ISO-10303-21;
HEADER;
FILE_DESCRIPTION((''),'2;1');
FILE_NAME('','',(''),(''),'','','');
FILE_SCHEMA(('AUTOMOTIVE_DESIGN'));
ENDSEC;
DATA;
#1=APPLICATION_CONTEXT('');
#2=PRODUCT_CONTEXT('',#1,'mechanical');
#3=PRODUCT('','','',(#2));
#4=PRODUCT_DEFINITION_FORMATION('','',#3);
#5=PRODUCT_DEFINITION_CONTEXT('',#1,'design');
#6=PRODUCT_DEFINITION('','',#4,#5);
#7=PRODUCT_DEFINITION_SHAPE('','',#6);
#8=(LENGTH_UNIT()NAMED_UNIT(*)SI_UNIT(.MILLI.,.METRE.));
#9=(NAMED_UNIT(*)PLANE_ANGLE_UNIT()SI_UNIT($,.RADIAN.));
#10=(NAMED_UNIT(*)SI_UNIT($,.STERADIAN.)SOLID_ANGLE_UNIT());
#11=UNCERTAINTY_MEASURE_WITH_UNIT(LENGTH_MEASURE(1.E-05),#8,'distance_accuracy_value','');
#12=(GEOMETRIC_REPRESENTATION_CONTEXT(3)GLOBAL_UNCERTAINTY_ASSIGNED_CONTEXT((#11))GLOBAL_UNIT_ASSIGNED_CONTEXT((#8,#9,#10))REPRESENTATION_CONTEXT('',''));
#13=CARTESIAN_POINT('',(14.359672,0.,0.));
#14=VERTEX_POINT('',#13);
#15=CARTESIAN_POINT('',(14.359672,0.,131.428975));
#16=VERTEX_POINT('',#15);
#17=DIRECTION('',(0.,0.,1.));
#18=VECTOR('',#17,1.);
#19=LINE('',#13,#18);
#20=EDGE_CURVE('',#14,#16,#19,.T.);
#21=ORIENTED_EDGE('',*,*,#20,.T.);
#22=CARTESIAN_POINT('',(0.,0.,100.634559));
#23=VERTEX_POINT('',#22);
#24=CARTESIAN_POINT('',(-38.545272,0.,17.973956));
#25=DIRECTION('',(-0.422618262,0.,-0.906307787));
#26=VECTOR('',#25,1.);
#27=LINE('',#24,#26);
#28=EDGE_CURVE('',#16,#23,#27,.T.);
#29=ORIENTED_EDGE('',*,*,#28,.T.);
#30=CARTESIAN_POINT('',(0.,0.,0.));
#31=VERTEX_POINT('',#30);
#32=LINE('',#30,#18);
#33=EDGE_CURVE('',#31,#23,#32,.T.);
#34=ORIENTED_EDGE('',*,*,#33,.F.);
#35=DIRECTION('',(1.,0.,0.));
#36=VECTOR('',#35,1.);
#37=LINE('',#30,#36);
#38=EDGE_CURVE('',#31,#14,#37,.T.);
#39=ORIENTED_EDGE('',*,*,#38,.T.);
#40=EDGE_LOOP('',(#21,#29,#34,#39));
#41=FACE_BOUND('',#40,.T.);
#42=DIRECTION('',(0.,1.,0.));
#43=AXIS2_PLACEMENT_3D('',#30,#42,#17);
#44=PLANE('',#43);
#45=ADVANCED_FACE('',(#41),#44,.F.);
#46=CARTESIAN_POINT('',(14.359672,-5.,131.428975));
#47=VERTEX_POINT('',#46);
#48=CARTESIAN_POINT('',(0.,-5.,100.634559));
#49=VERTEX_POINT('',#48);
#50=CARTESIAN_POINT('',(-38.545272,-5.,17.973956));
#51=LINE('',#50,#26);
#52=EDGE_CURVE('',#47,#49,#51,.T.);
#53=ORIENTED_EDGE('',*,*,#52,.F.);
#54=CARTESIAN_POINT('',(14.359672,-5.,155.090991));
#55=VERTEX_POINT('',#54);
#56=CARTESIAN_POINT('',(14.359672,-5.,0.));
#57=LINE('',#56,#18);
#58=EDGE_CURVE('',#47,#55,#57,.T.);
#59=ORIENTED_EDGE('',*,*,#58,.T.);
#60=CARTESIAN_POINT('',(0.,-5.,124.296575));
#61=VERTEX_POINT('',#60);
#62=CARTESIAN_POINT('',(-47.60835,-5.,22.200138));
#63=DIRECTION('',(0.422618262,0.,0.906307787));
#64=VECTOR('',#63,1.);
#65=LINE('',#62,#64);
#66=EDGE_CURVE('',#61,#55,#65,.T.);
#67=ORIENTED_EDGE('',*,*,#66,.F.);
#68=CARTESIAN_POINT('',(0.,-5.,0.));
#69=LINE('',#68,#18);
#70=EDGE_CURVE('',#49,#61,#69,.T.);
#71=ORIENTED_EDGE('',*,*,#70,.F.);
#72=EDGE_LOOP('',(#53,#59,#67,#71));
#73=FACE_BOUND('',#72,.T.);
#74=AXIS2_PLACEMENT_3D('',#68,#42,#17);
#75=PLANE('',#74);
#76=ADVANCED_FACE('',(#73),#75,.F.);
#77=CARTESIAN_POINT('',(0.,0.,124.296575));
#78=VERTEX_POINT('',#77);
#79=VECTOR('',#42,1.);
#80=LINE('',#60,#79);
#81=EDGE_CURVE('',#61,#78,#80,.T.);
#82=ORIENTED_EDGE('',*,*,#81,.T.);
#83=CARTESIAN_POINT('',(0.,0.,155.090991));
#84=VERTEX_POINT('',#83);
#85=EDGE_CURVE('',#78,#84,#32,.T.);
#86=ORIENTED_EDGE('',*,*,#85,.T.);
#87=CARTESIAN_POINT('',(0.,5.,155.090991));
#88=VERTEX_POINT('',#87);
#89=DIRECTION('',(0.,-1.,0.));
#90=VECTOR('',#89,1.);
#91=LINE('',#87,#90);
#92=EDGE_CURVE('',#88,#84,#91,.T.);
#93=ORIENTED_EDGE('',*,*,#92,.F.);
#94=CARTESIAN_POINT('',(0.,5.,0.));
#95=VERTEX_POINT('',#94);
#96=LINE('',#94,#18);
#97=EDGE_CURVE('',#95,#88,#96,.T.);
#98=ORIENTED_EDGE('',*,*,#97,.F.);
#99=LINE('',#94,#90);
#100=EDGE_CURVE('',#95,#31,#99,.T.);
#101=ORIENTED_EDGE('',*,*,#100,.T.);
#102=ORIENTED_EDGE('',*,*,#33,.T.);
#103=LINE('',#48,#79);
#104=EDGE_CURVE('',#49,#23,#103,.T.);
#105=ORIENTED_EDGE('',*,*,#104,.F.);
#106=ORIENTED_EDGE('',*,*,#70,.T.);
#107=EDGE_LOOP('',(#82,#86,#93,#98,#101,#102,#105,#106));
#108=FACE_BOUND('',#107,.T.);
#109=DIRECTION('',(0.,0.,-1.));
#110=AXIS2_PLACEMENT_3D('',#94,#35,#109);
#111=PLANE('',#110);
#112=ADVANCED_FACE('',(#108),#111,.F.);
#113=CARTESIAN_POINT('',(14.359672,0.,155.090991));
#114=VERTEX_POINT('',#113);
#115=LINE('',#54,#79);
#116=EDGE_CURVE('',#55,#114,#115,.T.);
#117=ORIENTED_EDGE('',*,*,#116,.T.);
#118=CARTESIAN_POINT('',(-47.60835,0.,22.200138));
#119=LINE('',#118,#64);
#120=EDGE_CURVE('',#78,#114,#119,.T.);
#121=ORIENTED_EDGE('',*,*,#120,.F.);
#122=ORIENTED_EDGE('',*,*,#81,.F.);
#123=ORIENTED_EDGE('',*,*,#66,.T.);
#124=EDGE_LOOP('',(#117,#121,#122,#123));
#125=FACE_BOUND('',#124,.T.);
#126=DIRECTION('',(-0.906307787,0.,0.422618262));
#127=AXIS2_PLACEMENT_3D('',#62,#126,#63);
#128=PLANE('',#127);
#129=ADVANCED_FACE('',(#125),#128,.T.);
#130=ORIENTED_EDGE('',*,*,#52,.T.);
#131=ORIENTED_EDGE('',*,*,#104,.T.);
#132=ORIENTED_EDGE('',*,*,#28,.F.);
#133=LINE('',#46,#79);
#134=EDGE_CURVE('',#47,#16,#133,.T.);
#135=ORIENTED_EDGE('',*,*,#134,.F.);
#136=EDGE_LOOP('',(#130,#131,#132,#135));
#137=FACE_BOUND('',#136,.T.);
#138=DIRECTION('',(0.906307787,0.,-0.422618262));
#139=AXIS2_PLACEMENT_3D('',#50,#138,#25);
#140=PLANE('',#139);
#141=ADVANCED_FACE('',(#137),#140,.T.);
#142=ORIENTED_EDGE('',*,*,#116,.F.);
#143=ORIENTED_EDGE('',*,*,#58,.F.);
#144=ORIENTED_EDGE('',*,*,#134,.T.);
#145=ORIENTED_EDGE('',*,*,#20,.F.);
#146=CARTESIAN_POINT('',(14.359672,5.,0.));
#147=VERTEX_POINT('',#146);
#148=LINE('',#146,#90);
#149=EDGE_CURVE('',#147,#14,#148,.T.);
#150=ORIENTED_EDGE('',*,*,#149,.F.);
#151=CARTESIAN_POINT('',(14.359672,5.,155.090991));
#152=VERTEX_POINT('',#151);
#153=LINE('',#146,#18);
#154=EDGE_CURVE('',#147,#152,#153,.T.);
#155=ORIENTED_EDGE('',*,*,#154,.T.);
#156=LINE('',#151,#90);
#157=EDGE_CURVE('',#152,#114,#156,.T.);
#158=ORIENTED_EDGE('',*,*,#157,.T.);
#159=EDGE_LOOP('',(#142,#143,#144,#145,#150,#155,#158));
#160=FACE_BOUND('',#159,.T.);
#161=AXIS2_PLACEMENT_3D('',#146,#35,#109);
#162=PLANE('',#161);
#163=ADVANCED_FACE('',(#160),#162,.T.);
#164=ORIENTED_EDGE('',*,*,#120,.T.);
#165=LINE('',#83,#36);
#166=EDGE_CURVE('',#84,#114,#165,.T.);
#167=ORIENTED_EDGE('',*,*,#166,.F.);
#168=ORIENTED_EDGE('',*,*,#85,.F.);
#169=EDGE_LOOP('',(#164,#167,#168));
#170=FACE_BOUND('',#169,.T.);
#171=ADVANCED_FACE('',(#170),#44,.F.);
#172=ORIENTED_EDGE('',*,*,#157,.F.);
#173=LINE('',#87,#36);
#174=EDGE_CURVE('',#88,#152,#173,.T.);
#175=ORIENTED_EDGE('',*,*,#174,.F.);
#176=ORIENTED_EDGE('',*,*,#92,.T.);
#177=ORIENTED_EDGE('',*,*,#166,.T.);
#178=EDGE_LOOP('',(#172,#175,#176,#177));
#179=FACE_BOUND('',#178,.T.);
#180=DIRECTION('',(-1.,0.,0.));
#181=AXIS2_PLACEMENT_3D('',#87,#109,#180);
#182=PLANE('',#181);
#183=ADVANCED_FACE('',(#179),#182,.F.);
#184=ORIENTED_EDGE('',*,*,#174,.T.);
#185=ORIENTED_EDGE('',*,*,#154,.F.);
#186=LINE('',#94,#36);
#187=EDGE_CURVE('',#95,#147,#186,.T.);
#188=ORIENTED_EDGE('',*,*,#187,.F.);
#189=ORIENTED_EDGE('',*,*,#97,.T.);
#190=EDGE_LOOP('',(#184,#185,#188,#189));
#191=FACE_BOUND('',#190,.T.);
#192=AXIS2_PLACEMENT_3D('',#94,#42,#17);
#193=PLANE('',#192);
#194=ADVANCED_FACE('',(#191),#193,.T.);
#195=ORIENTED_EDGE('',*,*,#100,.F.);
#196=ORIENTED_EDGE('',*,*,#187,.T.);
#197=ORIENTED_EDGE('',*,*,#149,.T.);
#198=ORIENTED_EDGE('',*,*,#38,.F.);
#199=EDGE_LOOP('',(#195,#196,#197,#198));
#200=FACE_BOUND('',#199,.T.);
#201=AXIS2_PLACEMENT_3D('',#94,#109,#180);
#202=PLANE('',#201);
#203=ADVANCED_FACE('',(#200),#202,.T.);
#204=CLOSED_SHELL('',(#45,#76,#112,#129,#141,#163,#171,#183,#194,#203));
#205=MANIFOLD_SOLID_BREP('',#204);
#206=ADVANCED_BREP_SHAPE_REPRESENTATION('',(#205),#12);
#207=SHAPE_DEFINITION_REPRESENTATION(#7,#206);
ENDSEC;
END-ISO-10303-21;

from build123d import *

# Parameters (mm, degrees)
BOSS_EXTRUDE1_DEPTH = 5
BOSS_EXTRUDE2_START = -5
BOSS_EXTRUDE2_DEPTH = 5


# Read off the part's stored shape, not the designer's step: Boss-Extrude2
with BuildPart() as part:
    # Sketch1 → Boss-Extrude1 (new body)
    with BuildSketch(Plane(origin=(0, 0, 0), x_dir=(1, 0, 0), z_dir=(0, 1, 0))):
        Polygon((14.359671821, -155.090990788), (0, -124.296575192), (0, -155.090990788), align=None)
        Polygon((0, -100.63455936), (0, -124.296575192), (14.359671821, -155.090990788), (14.359671821, -131.428974957), align=None)
        Polygon((0, 0), (0, -100.63455936), (14.359671821, -131.428974957), (14.359671821, 0), align=None)
    extrude(amount=BOSS_EXTRUDE1_DEPTH)

    # Boss-Extrude2 outline → Boss-Extrude2 (add)
    with BuildSketch(Plane(origin=(0, 0, 0), x_dir=(1, 0, 0), z_dir=(0, 1, 0)).offset(BOSS_EXTRUDE2_START)):
        Polygon((0, -100.63455936), (0, -124.296575192), (14.359671821, -155.090990788), (14.359671821, -131.428974957), align=None)
    extrude(amount=BOSS_EXTRUDE2_DEPTH)


solid = part.part
